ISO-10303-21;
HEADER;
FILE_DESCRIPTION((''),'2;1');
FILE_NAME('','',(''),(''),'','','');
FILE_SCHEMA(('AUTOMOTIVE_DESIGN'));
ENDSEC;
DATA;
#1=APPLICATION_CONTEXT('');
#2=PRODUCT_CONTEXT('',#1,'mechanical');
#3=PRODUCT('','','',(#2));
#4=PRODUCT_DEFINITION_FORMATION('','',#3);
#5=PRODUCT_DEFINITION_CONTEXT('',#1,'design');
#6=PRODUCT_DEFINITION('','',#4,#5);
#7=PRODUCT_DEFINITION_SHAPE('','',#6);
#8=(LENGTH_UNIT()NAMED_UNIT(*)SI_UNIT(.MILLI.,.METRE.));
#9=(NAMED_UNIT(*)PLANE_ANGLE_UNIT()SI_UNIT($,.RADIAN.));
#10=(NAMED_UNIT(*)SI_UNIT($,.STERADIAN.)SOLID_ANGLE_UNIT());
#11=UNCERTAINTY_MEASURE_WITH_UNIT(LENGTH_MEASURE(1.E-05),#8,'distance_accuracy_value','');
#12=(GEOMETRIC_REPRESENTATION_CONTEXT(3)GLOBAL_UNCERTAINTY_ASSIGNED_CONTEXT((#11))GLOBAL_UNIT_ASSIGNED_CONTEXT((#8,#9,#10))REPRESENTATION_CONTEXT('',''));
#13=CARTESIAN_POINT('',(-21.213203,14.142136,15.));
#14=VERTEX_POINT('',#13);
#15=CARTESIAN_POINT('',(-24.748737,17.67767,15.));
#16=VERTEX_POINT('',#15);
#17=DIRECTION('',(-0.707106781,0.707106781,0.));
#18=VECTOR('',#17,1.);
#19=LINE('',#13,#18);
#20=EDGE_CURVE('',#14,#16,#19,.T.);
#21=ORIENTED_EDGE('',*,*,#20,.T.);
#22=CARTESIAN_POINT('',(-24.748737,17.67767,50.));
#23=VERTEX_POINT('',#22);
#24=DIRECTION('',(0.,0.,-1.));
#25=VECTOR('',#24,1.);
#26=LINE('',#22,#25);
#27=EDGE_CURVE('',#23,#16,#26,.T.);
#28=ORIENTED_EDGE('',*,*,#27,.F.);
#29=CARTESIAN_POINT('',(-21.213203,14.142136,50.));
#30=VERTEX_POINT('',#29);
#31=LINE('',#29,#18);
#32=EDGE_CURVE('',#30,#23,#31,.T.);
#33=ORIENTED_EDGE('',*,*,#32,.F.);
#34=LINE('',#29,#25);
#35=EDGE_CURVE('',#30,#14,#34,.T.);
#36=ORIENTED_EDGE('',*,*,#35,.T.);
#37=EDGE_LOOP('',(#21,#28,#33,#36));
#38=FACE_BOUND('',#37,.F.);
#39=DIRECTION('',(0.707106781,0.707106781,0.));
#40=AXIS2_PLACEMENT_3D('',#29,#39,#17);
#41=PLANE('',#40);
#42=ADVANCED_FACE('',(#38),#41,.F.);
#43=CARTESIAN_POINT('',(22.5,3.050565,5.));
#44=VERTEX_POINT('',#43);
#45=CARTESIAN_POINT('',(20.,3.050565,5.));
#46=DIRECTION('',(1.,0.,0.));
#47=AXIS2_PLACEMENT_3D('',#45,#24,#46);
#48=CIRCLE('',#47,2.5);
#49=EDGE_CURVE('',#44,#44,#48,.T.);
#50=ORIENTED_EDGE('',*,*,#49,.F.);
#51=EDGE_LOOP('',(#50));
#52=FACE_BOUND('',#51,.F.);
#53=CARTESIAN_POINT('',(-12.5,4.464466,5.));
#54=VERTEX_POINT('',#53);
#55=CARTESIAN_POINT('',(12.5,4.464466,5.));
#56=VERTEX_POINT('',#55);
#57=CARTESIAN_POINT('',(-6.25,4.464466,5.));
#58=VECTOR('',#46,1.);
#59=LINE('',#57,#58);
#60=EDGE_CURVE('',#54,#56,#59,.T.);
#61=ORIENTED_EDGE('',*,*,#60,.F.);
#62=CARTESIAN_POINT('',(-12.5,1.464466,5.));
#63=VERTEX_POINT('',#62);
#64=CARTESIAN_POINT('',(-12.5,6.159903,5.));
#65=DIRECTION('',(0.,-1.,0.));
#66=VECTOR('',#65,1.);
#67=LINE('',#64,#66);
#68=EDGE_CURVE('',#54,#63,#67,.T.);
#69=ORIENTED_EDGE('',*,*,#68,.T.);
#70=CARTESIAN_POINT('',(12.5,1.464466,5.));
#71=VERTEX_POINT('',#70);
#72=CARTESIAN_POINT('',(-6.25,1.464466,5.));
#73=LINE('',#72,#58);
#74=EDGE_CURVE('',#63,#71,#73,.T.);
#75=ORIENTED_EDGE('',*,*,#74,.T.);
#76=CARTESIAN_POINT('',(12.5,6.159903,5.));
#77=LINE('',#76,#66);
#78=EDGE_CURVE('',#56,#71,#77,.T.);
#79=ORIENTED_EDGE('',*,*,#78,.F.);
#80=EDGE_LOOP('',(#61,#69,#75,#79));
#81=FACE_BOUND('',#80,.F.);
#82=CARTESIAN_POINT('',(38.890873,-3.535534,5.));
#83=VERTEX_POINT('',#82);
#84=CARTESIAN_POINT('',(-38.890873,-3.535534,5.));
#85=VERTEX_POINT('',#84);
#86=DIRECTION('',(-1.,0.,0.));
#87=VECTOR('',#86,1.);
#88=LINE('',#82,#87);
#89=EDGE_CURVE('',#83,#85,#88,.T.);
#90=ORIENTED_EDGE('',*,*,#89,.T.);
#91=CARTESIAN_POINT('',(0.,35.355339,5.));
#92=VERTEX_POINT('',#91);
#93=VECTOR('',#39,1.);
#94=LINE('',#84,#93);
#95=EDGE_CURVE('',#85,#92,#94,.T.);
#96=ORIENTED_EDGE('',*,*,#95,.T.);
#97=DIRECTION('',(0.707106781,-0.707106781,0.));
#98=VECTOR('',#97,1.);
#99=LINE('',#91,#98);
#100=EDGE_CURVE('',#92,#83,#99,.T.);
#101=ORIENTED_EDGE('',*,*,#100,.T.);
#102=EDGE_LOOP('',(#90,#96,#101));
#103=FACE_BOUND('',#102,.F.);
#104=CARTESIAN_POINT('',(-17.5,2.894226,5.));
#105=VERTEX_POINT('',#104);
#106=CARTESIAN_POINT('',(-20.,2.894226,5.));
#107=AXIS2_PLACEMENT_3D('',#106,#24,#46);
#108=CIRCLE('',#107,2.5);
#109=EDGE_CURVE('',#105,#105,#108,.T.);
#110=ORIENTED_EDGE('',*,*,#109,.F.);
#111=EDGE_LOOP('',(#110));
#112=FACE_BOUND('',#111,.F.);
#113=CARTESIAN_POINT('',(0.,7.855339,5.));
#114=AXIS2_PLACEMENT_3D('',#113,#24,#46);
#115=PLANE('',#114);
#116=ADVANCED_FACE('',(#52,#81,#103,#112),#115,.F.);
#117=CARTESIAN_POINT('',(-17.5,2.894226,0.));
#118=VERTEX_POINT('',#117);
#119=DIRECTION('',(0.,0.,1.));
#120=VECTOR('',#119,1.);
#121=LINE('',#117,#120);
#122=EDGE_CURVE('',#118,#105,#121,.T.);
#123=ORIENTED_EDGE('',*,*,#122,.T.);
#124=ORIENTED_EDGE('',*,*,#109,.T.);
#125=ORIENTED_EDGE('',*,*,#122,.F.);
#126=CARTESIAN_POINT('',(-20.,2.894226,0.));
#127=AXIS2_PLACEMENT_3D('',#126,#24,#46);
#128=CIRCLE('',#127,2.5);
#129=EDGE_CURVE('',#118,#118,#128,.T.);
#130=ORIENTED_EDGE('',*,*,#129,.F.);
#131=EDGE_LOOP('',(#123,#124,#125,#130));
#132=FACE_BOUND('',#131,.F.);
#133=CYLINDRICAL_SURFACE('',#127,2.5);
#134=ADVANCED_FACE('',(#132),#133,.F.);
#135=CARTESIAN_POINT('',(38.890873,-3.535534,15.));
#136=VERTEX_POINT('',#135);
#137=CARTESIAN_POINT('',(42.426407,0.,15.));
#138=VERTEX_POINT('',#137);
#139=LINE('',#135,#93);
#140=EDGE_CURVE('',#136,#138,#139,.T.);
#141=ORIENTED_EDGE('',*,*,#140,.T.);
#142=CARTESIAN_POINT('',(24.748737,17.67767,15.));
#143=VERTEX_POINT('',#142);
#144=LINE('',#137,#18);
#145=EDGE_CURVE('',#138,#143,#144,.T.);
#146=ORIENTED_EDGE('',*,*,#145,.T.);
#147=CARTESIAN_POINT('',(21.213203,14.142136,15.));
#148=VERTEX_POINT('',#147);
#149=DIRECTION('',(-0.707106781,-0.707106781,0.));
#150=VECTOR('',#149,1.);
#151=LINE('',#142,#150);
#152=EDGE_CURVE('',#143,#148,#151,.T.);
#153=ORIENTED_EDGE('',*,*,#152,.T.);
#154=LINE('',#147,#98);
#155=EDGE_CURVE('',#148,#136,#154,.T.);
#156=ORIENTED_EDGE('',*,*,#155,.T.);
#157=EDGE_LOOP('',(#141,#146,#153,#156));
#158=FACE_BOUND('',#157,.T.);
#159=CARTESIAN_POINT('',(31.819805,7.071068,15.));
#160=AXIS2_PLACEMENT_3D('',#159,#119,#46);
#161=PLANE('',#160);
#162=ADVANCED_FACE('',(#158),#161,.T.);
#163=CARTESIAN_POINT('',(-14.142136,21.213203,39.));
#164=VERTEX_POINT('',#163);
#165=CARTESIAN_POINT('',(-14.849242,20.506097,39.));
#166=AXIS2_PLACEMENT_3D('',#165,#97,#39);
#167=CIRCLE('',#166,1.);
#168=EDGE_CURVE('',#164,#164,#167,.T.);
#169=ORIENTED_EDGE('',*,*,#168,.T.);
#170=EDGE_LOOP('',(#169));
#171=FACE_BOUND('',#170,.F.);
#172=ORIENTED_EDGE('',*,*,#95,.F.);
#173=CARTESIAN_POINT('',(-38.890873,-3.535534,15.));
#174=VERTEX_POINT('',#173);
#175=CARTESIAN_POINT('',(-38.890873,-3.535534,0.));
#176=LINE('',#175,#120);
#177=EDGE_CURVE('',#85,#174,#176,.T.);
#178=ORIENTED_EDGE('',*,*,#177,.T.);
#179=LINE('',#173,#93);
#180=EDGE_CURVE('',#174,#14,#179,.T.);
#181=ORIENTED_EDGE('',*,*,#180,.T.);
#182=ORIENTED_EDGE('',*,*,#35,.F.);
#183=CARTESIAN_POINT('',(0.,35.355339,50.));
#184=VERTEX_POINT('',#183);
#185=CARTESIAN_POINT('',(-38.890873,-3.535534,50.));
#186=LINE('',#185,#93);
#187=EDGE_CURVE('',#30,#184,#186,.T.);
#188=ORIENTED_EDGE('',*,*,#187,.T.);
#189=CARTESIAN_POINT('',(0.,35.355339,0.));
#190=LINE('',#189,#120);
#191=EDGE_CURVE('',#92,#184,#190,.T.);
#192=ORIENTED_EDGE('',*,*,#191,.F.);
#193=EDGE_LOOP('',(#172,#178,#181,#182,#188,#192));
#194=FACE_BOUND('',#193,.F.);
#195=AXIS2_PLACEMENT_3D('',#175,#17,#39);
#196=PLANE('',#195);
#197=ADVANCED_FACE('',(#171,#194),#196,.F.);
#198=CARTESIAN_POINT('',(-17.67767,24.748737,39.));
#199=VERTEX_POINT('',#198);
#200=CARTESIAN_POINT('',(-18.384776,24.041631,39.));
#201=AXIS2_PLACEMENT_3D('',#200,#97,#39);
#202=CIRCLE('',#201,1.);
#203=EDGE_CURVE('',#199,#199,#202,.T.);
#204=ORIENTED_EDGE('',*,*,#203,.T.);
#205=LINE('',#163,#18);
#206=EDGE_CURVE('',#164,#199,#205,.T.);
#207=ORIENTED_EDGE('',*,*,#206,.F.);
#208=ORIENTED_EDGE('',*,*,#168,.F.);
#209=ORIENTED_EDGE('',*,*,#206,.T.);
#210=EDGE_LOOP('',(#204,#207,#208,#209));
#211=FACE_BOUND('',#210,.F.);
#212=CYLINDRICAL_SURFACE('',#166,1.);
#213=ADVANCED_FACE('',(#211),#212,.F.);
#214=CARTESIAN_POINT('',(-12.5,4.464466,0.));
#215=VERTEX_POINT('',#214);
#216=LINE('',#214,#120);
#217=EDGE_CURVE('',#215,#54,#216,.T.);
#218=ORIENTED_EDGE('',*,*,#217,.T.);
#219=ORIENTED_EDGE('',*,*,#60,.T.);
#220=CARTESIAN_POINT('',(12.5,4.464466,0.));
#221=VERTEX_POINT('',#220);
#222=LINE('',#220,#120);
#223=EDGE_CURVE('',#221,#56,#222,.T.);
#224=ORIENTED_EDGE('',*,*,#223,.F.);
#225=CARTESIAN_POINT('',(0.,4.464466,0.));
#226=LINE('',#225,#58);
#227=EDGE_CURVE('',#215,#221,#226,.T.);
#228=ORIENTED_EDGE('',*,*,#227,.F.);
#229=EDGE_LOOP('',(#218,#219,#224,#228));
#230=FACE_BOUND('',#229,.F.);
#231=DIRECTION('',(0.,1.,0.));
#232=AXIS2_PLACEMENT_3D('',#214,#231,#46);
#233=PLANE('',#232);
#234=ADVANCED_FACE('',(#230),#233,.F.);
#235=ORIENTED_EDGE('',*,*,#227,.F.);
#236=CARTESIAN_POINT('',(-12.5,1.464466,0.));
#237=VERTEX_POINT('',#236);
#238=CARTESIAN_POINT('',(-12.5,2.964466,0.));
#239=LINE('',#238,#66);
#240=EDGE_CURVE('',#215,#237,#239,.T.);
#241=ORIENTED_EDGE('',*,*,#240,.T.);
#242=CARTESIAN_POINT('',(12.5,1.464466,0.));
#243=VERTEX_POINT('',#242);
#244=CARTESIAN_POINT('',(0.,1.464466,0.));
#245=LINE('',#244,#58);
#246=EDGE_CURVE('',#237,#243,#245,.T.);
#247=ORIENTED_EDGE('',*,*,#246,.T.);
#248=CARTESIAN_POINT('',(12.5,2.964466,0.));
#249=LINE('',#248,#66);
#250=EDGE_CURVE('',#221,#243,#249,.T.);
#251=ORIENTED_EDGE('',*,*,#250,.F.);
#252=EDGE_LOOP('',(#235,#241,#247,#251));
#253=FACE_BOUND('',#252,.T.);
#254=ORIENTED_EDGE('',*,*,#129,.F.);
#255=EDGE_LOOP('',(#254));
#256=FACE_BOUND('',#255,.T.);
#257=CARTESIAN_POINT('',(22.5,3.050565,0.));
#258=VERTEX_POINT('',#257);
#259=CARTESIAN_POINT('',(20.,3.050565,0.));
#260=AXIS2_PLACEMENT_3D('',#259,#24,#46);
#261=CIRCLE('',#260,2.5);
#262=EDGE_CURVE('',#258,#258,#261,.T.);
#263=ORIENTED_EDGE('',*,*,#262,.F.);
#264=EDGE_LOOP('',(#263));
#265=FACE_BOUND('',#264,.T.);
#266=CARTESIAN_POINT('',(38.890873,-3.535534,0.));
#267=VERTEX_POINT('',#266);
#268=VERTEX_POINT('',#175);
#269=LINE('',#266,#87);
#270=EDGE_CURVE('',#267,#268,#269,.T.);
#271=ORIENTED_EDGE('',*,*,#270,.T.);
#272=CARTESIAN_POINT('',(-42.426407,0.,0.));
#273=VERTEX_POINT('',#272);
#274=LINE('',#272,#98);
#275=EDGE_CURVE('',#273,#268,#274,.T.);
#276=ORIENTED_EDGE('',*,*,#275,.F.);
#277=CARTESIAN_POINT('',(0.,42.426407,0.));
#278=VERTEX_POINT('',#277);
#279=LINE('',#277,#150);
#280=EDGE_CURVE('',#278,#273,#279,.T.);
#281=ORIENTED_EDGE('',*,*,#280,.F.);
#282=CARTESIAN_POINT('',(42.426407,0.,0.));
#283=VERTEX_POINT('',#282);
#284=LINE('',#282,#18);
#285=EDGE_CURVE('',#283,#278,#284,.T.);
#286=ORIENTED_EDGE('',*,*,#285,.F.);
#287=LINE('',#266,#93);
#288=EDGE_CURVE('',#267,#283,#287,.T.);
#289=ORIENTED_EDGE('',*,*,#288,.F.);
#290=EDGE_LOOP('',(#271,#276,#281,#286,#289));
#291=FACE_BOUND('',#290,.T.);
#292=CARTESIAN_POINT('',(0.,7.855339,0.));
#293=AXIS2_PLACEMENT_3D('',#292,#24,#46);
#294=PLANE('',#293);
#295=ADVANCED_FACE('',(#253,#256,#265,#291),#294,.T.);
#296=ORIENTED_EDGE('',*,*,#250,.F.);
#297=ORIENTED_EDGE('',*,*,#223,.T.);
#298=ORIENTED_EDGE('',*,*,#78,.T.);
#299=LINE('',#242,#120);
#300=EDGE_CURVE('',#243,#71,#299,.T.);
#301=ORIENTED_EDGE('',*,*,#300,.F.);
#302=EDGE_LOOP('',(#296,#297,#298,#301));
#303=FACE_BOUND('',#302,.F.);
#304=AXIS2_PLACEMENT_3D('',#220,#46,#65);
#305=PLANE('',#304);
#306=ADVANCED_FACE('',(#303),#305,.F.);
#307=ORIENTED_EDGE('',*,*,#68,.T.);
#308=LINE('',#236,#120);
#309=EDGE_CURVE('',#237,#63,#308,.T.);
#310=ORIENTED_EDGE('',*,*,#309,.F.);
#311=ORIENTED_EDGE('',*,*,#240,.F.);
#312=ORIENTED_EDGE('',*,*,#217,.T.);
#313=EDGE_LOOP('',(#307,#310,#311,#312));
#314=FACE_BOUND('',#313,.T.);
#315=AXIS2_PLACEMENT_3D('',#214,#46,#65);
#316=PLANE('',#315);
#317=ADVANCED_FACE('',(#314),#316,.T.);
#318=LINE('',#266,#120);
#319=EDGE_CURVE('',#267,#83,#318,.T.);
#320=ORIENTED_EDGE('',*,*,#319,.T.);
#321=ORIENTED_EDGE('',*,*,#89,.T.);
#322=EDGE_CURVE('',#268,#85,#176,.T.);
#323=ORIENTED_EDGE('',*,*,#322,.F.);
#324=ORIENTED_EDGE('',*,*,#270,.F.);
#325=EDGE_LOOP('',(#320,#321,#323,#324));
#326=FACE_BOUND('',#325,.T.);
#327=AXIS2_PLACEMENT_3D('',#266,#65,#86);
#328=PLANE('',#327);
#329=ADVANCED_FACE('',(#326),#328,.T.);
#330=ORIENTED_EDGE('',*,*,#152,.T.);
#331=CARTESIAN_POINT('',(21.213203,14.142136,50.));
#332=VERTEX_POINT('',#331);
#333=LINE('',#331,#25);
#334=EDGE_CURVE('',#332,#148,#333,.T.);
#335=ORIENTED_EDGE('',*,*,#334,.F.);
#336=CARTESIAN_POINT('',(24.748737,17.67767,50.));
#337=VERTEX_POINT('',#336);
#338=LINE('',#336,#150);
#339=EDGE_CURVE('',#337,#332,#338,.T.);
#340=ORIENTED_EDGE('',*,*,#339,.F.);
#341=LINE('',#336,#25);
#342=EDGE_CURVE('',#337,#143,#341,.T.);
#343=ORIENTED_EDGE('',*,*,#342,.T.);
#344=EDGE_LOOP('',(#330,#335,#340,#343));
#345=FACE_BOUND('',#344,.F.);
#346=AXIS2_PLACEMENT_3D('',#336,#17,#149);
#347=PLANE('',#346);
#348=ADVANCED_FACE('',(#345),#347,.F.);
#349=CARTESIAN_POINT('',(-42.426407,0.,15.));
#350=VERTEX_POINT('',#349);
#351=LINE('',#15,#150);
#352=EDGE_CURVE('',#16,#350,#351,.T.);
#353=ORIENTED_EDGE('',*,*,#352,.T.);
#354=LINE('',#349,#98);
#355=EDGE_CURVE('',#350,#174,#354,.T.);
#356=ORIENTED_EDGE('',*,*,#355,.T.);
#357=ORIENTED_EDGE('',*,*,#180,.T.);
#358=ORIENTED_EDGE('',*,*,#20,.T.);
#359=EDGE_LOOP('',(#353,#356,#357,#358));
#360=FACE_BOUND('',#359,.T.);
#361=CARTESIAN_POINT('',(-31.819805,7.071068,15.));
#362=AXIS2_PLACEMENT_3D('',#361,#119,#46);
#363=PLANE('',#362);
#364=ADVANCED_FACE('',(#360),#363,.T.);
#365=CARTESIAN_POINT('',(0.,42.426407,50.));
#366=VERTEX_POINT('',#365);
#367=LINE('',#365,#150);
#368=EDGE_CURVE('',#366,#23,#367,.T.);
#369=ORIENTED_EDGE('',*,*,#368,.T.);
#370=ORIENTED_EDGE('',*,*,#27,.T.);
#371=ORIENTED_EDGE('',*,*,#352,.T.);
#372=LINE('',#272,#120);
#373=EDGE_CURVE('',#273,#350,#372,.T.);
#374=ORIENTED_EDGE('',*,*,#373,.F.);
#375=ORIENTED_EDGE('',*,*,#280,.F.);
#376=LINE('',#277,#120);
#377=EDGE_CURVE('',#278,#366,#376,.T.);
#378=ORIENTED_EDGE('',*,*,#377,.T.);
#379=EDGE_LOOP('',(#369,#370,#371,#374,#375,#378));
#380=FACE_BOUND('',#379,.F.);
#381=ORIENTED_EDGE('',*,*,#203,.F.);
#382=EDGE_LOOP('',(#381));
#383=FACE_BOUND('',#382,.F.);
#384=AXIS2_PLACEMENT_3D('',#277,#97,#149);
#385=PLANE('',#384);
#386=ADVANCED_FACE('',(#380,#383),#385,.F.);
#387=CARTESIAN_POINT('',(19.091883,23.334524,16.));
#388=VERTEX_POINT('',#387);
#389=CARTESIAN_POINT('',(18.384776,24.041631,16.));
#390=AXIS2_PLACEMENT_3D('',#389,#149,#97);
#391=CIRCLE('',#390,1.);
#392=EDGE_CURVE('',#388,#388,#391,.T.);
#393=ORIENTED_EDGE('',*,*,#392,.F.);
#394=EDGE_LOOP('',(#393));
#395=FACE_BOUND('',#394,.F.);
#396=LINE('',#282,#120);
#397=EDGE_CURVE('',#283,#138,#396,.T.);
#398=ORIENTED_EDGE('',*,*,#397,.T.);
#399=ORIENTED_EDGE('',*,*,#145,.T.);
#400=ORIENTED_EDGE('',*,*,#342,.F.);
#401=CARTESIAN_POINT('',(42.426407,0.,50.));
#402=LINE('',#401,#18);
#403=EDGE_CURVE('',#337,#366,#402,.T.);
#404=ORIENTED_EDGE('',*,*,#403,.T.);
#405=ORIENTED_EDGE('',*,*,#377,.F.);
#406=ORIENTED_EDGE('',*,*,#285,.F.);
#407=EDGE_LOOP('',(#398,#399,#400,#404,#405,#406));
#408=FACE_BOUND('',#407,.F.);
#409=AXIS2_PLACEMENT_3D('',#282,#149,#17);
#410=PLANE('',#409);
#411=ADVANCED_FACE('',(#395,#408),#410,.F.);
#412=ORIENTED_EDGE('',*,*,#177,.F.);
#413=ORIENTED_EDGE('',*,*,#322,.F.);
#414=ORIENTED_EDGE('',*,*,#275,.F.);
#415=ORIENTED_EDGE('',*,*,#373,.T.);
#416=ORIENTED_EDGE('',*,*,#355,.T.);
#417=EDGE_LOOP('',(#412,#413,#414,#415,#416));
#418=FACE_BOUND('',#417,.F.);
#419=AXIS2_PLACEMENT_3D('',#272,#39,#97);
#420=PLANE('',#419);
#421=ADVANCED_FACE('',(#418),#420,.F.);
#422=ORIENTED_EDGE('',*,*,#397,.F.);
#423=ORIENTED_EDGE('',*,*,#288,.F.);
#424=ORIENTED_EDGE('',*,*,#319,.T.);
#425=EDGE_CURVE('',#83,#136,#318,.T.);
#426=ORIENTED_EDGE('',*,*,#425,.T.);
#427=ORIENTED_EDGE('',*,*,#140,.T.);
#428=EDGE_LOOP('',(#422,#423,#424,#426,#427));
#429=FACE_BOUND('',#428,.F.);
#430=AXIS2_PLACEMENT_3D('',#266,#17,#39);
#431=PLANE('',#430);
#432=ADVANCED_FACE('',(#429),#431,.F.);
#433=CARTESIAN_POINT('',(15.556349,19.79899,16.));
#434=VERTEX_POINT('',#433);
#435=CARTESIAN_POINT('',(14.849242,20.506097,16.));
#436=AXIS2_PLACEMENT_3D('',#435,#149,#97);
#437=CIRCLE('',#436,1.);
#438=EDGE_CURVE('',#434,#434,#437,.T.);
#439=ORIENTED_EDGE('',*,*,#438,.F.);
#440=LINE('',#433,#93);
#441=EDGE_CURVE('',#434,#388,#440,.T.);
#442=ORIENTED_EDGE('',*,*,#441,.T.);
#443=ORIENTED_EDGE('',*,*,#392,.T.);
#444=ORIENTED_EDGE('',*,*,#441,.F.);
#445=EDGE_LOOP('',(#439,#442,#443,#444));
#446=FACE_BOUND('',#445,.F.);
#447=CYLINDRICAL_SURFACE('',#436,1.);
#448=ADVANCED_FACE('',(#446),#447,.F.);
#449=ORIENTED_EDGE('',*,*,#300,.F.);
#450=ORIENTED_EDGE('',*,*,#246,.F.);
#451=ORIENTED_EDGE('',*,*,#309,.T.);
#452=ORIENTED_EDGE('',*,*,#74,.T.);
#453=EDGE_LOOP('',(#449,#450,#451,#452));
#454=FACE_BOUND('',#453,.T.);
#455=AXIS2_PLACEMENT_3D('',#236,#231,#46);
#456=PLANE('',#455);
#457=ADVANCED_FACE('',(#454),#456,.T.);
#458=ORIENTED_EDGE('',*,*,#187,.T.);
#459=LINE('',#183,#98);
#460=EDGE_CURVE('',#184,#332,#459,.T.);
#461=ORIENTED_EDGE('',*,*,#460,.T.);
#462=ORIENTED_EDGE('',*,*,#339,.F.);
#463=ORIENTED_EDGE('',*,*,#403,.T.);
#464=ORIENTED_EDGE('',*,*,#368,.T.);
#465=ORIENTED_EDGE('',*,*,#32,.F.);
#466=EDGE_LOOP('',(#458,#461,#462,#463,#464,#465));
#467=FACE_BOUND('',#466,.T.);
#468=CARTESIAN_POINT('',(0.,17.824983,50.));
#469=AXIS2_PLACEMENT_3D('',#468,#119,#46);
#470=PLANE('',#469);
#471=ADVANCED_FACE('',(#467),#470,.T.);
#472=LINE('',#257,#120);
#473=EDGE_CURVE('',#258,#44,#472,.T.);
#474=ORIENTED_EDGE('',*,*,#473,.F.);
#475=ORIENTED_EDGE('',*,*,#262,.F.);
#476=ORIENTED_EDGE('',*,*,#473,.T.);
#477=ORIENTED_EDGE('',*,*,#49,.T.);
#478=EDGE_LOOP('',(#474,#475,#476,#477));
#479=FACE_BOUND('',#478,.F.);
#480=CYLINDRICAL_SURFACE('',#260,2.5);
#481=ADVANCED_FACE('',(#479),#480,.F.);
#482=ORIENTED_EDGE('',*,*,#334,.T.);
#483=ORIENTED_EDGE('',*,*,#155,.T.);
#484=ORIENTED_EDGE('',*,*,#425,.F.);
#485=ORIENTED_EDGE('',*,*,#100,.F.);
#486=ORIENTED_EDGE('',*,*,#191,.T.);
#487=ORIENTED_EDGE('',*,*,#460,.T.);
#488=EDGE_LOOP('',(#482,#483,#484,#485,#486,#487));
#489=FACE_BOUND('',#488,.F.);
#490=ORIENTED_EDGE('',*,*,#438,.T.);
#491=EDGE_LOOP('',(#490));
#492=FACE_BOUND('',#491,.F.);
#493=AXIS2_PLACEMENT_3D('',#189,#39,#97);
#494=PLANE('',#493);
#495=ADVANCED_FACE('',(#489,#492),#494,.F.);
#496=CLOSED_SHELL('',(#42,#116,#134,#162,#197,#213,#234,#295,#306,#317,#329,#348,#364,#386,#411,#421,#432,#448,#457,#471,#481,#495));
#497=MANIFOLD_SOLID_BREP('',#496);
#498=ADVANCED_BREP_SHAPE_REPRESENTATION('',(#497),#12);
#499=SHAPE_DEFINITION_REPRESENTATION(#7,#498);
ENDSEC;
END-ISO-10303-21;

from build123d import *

# Parameters (mm, degrees)
F1_DEPTH  = 50
F3_DEPTH  = 5
F4_W      = 25
F4_H      = 3
F4_R      = 2.5
F5_DEPTH  = 25
F6_R      = 1
F8_DEPTH  = 25
F7_R      = 1
F9_DEPTH  = 25
F13_DEPTH = 35


# Not quite as in the source:
# - a feature names something its author has since deleted; it is built from what else it names


with BuildPart() as f1:
    # F0 (on Top) → F1 (new body)
    with BuildSketch(Plane.XY):
        Polygon((0, 42.4264068712), (-42.4264068712, 0), (-38.8908729653, -3.5355339059), (0, 35.3553390593), (38.8908729653, -3.5355339059), (42.4264068712, 0), align=None)
    extrude(amount=F1_DEPTH)

    # F2 (on face) → F3 (join)
    with BuildSketch(Plane(origin=(0, 0, 0), x_dir=(1, 0, 0), z_dir=(0, 0, -1))):
        Polygon((38.8908729653, 3.5355339059), (-38.8908729653, 3.5355339059), (0, -35.3553390593), align=None)
    extrude(amount=-F3_DEPTH)

    # F4 (on face) → F5 (cut)
    with BuildSketch(Plane(origin=(0, 0, 0), x_dir=(1, 0, 0), z_dir=(0, 0, -1))):
        with Locations((0, -2.9644660941)):
            Rectangle(F4_W, F4_H)
        with Locations((20, -3.0505650211)):
            Circle(F4_R)
        with Locations((-20, -2.8942257773)):
            Circle(F4_R)
    extrude(amount=-F5_DEPTH, mode=Mode.SUBTRACT)

    # F6 (on face) → F8 (cut)
    with BuildSketch(Plane(origin=(-17.6776695297, 17.6776695297, 0), x_dir=(0.7071067812, 0.7071067812, 0), z_dir=(0.7071067812, -0.7071067812, 0))):
        with Locations((4, 39)):
            Circle(F6_R)
    extrude(amount=-F8_DEPTH, mode=Mode.SUBTRACT)

    # F7 (on face) → F9 (cut)
    with BuildSketch(Plane(origin=(17.6776695297, 17.6776695297, 0), x_dir=(0.7071067812, -0.7071067812, 0), z_dir=(-0.7071067812, -0.7071067812, 0))):
        with Locations((-4, 16)):
            Circle(F7_R)
    extrude(amount=-F9_DEPTH, mode=Mode.SUBTRACT)

    # F12 (on face) → F13 (cut)
    with BuildSketch(Plane.XY.offset(50)):
        Polygon((-38.8908729653, -3.5355339059), (-21.2132034356, 14.1421356237), (-24.7487373415, 17.6776695297), (-42.4264068712, 0), align=None)
        Polygon((24.7487373415, 17.6776695297), (21.2132034356, 14.1421356237), (38.8908729653, -3.5355339059), (42.4264068712, 0), align=None)
    extrude(amount=-F13_DEPTH, mode=Mode.SUBTRACT)


solid = f1.part
